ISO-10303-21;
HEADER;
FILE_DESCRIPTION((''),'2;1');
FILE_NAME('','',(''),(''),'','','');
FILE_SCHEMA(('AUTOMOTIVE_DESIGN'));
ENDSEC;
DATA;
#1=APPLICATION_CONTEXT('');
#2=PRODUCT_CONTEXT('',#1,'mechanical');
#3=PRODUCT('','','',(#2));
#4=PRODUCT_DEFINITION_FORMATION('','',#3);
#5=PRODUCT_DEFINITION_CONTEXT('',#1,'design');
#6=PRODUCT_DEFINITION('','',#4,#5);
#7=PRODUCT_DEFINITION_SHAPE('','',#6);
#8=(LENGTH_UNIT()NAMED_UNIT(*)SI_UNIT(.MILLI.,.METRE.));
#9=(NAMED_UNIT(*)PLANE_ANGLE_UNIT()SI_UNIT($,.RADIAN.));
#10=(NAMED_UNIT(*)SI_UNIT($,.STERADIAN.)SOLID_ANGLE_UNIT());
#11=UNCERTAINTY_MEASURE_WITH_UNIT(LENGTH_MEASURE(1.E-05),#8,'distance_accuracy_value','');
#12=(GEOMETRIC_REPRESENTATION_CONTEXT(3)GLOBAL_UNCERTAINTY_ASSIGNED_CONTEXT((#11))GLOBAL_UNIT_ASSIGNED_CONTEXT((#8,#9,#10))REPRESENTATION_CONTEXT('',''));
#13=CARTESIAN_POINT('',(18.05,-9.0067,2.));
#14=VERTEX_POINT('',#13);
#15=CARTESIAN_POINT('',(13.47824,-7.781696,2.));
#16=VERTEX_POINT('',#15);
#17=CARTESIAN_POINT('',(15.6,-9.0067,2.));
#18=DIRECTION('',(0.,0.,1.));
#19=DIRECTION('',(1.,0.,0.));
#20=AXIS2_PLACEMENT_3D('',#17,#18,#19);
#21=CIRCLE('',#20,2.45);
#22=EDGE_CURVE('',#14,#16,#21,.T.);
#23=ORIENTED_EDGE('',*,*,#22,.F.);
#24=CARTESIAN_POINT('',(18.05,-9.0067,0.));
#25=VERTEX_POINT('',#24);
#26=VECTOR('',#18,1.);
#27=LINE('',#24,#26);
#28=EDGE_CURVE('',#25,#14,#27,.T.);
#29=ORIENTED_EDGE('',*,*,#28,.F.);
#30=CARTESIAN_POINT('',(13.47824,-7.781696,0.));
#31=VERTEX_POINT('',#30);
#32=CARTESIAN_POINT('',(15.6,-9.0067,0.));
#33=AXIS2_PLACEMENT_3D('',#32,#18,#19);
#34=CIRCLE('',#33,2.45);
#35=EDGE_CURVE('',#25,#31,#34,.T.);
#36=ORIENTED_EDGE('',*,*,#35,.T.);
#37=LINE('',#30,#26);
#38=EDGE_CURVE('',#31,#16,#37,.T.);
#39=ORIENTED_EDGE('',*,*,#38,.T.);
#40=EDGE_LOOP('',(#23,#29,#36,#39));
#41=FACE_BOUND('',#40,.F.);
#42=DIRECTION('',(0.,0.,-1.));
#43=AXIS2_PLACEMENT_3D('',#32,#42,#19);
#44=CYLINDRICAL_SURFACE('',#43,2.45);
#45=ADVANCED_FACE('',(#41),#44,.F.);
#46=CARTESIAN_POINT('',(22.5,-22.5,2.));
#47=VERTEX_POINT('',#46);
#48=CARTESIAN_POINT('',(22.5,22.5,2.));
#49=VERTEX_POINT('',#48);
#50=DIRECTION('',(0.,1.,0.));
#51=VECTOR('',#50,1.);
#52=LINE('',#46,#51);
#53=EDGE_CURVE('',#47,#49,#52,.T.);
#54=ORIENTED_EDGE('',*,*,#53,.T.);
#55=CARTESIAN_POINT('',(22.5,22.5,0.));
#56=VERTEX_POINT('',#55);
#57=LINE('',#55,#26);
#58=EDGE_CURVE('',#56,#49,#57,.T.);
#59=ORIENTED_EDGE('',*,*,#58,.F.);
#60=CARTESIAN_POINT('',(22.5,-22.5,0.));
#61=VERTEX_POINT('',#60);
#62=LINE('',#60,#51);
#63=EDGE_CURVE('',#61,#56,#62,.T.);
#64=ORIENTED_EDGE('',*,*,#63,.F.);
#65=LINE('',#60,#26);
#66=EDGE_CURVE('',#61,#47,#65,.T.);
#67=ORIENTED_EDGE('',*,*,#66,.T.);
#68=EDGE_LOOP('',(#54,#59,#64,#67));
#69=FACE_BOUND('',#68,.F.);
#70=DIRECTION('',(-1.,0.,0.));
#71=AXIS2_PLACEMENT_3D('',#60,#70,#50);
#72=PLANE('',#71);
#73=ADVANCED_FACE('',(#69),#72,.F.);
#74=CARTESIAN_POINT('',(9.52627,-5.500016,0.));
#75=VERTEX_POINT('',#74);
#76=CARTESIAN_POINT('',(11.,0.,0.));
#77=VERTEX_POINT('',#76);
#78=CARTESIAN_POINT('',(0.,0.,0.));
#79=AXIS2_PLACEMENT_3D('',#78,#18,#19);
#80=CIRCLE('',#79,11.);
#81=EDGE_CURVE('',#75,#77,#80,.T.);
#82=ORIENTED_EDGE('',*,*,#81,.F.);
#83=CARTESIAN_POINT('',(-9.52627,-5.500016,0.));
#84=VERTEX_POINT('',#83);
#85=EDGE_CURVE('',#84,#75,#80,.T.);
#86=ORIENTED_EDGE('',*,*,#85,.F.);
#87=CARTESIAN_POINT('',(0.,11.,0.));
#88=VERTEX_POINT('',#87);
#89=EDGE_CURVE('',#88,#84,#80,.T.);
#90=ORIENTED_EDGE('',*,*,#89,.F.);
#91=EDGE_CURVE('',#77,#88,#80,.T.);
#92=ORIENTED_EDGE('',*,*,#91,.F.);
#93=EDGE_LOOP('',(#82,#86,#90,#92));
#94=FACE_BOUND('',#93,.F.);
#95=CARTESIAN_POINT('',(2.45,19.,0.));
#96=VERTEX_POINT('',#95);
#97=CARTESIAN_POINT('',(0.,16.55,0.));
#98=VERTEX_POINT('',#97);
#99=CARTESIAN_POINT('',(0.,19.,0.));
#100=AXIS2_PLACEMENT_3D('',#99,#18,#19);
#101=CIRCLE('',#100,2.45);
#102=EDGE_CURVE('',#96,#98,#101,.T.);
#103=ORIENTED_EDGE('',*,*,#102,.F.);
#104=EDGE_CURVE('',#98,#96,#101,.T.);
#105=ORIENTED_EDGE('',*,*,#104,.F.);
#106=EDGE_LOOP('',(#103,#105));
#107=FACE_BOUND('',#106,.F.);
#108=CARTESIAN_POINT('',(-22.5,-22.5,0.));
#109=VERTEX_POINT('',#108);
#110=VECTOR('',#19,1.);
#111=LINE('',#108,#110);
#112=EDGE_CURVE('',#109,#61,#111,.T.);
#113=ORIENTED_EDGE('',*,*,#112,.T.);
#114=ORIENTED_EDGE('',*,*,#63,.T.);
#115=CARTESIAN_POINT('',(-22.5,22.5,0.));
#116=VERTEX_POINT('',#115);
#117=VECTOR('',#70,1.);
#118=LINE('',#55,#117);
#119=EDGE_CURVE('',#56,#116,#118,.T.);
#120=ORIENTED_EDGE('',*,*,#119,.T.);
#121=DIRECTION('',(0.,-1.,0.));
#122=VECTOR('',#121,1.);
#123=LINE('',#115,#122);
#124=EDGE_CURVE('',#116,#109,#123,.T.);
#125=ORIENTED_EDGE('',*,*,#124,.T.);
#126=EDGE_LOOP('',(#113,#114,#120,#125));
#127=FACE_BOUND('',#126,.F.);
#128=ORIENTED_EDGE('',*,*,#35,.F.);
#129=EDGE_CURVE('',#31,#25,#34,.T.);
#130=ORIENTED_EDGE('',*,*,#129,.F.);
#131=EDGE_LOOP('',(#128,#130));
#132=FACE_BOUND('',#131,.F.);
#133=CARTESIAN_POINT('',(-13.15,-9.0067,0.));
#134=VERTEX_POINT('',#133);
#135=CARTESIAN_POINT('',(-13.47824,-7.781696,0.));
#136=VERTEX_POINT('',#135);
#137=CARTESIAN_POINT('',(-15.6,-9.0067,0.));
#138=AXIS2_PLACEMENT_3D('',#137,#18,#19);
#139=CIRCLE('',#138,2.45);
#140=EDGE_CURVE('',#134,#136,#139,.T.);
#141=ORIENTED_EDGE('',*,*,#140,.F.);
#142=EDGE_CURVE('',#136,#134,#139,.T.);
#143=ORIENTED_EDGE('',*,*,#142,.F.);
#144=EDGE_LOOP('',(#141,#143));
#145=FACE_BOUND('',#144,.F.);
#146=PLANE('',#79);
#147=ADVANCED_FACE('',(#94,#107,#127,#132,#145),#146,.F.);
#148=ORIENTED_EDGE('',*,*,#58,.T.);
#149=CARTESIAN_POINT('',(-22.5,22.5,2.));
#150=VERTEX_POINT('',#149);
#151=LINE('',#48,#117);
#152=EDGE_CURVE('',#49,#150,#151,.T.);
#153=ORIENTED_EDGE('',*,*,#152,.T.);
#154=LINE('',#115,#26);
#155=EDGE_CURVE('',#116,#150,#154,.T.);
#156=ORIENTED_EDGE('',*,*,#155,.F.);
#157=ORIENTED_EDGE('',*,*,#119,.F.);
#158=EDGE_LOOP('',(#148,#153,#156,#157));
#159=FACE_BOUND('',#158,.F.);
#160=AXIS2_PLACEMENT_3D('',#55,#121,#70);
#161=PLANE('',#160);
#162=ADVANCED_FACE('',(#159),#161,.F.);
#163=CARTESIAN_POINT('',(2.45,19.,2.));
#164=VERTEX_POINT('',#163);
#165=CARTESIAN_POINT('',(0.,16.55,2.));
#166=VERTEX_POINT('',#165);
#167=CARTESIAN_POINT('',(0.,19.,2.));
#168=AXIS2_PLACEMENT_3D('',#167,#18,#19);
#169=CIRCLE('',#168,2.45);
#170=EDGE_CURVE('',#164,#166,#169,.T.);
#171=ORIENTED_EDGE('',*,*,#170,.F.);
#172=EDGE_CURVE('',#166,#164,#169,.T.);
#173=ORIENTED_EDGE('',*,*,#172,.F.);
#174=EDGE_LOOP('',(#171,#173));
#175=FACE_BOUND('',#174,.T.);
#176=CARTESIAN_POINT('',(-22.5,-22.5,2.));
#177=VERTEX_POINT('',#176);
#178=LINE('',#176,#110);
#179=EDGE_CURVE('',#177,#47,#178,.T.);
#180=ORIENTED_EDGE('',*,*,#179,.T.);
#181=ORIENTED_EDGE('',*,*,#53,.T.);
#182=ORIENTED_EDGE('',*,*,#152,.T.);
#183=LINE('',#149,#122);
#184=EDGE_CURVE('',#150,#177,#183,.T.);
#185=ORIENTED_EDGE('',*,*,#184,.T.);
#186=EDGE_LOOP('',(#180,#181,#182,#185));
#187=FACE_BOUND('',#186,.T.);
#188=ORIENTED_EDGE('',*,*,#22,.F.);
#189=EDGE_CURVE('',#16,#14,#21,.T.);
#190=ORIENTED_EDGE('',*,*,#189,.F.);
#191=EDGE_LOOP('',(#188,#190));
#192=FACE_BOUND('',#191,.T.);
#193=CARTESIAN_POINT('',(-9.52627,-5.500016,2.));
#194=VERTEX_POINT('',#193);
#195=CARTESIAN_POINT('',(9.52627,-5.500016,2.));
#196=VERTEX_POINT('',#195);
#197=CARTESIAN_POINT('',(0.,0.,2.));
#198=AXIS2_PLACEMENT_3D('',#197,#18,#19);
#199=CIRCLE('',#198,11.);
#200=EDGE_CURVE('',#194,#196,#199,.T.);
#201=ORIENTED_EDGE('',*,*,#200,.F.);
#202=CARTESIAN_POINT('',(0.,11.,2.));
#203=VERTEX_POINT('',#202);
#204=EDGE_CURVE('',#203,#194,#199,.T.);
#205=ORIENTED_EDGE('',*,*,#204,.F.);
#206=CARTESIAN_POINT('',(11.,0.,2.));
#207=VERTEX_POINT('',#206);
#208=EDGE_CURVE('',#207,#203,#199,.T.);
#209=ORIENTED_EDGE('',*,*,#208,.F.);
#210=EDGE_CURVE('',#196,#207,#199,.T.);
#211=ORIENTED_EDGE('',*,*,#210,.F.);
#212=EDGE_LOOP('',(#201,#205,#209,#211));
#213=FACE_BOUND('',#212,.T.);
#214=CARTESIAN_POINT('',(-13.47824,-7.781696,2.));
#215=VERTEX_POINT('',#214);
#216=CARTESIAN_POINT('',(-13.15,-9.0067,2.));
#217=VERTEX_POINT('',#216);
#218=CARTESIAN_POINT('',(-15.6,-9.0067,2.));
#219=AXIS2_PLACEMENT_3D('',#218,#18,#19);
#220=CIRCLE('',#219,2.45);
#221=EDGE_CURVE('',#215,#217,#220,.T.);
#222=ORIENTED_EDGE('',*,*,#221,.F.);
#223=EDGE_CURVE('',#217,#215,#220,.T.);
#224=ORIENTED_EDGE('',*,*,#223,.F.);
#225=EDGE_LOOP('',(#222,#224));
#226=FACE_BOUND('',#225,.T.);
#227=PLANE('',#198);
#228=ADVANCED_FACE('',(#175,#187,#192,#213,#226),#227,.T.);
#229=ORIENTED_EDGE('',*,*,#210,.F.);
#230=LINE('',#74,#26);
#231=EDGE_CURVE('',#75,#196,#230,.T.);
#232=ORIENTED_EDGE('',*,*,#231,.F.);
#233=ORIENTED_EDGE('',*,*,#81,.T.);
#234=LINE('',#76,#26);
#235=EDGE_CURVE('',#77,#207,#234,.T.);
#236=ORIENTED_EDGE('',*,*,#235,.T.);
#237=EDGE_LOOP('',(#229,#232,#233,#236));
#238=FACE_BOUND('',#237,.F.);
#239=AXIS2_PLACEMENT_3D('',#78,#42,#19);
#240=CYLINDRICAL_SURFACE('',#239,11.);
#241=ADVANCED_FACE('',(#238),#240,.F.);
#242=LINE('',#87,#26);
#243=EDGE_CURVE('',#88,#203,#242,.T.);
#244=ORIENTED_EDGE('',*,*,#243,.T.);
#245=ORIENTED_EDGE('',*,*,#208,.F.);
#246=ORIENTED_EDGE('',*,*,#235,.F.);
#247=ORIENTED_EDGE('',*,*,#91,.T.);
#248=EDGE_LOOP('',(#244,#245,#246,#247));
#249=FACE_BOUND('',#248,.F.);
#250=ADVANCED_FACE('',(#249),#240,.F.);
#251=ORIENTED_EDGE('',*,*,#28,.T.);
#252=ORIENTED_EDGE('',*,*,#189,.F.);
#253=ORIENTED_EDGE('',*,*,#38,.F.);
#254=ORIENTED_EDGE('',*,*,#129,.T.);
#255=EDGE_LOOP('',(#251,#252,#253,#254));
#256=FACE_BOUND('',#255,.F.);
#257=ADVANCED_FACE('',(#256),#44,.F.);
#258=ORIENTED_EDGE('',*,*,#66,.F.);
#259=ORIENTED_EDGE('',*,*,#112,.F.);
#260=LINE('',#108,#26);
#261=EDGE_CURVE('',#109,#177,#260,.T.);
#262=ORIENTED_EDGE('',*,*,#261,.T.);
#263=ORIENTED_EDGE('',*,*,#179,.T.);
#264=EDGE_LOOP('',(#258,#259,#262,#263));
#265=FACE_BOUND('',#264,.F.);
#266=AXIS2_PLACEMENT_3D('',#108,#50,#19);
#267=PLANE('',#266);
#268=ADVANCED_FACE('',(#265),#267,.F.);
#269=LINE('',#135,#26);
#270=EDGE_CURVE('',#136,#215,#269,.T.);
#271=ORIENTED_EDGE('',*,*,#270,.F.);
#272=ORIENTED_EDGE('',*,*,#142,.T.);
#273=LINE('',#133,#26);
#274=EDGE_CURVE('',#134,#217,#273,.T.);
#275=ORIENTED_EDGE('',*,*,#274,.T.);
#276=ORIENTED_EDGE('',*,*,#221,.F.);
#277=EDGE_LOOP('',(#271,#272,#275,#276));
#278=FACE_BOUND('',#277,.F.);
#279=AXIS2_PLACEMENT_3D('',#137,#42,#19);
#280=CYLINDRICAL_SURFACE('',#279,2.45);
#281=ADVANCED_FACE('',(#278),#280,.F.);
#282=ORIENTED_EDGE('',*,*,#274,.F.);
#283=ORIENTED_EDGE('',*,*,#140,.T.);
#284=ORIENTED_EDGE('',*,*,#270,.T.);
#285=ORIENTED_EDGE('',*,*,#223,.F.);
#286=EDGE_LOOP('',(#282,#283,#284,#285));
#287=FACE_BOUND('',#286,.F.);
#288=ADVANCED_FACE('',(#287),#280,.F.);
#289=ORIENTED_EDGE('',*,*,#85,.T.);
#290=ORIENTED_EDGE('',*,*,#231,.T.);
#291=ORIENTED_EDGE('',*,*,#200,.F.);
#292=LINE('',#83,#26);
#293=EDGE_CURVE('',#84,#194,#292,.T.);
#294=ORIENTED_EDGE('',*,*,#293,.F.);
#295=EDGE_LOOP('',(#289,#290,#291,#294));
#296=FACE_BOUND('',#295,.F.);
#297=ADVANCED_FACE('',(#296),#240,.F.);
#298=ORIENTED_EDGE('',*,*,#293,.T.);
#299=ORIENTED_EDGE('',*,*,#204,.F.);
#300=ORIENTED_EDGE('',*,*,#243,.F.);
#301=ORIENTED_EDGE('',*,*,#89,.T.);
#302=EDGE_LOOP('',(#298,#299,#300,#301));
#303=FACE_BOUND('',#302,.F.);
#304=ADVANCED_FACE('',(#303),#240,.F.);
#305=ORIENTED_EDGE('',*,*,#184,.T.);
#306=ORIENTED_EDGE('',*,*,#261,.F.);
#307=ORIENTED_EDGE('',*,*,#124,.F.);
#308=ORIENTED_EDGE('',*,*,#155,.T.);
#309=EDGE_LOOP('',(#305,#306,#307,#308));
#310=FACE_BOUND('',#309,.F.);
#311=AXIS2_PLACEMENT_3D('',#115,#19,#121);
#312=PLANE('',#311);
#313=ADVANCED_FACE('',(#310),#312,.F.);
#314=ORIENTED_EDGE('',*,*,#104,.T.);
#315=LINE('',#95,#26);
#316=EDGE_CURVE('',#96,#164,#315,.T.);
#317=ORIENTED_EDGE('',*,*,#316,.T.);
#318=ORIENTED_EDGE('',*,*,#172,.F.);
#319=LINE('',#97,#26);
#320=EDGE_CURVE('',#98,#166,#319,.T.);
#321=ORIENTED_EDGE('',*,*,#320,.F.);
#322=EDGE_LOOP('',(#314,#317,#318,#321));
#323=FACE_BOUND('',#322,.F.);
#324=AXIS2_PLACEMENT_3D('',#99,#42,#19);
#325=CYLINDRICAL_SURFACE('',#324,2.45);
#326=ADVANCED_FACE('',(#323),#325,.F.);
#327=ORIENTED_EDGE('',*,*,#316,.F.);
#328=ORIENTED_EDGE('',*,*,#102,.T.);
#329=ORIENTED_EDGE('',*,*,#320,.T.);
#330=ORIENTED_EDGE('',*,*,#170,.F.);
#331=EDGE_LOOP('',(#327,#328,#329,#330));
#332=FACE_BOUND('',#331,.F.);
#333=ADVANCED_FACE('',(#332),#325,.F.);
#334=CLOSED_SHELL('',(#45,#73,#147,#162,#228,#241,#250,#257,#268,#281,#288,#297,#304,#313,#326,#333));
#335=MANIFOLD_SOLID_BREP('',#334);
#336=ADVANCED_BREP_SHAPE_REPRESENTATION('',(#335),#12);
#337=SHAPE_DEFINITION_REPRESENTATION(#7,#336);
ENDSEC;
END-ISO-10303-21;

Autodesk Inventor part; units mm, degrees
ref_plane "YZ Plane" through (0, 0, 0) normal (1, 0, 0) x (0, 1, 0)
ref_plane "XZ Plane" through (0, 0, 0) normal (0, 1, 0) x (-1, 0, 0)
ref_plane "XY Plane" through (0, 0, 0) normal (0, 0, 1) x (1, 0, 0)
sketch "Sketch1" plane through (0, 0, 0) normal (0, 0, 1) x (1, 0, 0)
  line L0 (-22.5, -22.5) -> (22.5, -22.5)
  line L1 (22.5, -22.5) -> (22.5, 22.5)
  line L2 (22.5, 22.5) -> (-22.5, 22.5)
  line L3 (-22.5, 22.5) -> (-22.5, -22.5)
  line L4 (-22.5, -22.5) -> (22.5, 22.5) construction
  line L5 (22.5, -22.5) -> (-22.5, 22.5) construction
  circle A0 centre (0, 0) radius 11
  line L6 (0, 0) -> (0, 19)
  line L7 (0, 0) -> (15.6, -9.0067)
  line L8 (0, 0) -> (-15.6, -9.0067)
  circle A1 centre (0, 19) radius 2.45
  circle A2 centre (15.6, -9.0067) radius 2.45
  circle A3 centre (-15.6, -9.0067) radius 2.45
  point P0 (22.5, -11.0947)
  point P1 (-22.5, -11.0947)
  dimension "d0" = 45
  dimension "d1" = 45
  dimension "d2" = 22
  dimension "d3" = 19
  dimension "d4" = 15.6
  dimension "d5" = 120
  dimension "d6" = 15.6
  dimension "d7" = 120
  dimension "d8" = 4.9
  dimension "d9" = 4.9
  dimension "d10" = 4.9
extrude "Extrusion2" add sketch "Sketch1" along normal blind 2
equation "\"d1\" = d0"
equation "\"d4\" = d6"
equation "\"d7\" = d5"
equation "\"d9\" = d8"
equation "\"d10\" = d8"
properties part number "mount_v06"
